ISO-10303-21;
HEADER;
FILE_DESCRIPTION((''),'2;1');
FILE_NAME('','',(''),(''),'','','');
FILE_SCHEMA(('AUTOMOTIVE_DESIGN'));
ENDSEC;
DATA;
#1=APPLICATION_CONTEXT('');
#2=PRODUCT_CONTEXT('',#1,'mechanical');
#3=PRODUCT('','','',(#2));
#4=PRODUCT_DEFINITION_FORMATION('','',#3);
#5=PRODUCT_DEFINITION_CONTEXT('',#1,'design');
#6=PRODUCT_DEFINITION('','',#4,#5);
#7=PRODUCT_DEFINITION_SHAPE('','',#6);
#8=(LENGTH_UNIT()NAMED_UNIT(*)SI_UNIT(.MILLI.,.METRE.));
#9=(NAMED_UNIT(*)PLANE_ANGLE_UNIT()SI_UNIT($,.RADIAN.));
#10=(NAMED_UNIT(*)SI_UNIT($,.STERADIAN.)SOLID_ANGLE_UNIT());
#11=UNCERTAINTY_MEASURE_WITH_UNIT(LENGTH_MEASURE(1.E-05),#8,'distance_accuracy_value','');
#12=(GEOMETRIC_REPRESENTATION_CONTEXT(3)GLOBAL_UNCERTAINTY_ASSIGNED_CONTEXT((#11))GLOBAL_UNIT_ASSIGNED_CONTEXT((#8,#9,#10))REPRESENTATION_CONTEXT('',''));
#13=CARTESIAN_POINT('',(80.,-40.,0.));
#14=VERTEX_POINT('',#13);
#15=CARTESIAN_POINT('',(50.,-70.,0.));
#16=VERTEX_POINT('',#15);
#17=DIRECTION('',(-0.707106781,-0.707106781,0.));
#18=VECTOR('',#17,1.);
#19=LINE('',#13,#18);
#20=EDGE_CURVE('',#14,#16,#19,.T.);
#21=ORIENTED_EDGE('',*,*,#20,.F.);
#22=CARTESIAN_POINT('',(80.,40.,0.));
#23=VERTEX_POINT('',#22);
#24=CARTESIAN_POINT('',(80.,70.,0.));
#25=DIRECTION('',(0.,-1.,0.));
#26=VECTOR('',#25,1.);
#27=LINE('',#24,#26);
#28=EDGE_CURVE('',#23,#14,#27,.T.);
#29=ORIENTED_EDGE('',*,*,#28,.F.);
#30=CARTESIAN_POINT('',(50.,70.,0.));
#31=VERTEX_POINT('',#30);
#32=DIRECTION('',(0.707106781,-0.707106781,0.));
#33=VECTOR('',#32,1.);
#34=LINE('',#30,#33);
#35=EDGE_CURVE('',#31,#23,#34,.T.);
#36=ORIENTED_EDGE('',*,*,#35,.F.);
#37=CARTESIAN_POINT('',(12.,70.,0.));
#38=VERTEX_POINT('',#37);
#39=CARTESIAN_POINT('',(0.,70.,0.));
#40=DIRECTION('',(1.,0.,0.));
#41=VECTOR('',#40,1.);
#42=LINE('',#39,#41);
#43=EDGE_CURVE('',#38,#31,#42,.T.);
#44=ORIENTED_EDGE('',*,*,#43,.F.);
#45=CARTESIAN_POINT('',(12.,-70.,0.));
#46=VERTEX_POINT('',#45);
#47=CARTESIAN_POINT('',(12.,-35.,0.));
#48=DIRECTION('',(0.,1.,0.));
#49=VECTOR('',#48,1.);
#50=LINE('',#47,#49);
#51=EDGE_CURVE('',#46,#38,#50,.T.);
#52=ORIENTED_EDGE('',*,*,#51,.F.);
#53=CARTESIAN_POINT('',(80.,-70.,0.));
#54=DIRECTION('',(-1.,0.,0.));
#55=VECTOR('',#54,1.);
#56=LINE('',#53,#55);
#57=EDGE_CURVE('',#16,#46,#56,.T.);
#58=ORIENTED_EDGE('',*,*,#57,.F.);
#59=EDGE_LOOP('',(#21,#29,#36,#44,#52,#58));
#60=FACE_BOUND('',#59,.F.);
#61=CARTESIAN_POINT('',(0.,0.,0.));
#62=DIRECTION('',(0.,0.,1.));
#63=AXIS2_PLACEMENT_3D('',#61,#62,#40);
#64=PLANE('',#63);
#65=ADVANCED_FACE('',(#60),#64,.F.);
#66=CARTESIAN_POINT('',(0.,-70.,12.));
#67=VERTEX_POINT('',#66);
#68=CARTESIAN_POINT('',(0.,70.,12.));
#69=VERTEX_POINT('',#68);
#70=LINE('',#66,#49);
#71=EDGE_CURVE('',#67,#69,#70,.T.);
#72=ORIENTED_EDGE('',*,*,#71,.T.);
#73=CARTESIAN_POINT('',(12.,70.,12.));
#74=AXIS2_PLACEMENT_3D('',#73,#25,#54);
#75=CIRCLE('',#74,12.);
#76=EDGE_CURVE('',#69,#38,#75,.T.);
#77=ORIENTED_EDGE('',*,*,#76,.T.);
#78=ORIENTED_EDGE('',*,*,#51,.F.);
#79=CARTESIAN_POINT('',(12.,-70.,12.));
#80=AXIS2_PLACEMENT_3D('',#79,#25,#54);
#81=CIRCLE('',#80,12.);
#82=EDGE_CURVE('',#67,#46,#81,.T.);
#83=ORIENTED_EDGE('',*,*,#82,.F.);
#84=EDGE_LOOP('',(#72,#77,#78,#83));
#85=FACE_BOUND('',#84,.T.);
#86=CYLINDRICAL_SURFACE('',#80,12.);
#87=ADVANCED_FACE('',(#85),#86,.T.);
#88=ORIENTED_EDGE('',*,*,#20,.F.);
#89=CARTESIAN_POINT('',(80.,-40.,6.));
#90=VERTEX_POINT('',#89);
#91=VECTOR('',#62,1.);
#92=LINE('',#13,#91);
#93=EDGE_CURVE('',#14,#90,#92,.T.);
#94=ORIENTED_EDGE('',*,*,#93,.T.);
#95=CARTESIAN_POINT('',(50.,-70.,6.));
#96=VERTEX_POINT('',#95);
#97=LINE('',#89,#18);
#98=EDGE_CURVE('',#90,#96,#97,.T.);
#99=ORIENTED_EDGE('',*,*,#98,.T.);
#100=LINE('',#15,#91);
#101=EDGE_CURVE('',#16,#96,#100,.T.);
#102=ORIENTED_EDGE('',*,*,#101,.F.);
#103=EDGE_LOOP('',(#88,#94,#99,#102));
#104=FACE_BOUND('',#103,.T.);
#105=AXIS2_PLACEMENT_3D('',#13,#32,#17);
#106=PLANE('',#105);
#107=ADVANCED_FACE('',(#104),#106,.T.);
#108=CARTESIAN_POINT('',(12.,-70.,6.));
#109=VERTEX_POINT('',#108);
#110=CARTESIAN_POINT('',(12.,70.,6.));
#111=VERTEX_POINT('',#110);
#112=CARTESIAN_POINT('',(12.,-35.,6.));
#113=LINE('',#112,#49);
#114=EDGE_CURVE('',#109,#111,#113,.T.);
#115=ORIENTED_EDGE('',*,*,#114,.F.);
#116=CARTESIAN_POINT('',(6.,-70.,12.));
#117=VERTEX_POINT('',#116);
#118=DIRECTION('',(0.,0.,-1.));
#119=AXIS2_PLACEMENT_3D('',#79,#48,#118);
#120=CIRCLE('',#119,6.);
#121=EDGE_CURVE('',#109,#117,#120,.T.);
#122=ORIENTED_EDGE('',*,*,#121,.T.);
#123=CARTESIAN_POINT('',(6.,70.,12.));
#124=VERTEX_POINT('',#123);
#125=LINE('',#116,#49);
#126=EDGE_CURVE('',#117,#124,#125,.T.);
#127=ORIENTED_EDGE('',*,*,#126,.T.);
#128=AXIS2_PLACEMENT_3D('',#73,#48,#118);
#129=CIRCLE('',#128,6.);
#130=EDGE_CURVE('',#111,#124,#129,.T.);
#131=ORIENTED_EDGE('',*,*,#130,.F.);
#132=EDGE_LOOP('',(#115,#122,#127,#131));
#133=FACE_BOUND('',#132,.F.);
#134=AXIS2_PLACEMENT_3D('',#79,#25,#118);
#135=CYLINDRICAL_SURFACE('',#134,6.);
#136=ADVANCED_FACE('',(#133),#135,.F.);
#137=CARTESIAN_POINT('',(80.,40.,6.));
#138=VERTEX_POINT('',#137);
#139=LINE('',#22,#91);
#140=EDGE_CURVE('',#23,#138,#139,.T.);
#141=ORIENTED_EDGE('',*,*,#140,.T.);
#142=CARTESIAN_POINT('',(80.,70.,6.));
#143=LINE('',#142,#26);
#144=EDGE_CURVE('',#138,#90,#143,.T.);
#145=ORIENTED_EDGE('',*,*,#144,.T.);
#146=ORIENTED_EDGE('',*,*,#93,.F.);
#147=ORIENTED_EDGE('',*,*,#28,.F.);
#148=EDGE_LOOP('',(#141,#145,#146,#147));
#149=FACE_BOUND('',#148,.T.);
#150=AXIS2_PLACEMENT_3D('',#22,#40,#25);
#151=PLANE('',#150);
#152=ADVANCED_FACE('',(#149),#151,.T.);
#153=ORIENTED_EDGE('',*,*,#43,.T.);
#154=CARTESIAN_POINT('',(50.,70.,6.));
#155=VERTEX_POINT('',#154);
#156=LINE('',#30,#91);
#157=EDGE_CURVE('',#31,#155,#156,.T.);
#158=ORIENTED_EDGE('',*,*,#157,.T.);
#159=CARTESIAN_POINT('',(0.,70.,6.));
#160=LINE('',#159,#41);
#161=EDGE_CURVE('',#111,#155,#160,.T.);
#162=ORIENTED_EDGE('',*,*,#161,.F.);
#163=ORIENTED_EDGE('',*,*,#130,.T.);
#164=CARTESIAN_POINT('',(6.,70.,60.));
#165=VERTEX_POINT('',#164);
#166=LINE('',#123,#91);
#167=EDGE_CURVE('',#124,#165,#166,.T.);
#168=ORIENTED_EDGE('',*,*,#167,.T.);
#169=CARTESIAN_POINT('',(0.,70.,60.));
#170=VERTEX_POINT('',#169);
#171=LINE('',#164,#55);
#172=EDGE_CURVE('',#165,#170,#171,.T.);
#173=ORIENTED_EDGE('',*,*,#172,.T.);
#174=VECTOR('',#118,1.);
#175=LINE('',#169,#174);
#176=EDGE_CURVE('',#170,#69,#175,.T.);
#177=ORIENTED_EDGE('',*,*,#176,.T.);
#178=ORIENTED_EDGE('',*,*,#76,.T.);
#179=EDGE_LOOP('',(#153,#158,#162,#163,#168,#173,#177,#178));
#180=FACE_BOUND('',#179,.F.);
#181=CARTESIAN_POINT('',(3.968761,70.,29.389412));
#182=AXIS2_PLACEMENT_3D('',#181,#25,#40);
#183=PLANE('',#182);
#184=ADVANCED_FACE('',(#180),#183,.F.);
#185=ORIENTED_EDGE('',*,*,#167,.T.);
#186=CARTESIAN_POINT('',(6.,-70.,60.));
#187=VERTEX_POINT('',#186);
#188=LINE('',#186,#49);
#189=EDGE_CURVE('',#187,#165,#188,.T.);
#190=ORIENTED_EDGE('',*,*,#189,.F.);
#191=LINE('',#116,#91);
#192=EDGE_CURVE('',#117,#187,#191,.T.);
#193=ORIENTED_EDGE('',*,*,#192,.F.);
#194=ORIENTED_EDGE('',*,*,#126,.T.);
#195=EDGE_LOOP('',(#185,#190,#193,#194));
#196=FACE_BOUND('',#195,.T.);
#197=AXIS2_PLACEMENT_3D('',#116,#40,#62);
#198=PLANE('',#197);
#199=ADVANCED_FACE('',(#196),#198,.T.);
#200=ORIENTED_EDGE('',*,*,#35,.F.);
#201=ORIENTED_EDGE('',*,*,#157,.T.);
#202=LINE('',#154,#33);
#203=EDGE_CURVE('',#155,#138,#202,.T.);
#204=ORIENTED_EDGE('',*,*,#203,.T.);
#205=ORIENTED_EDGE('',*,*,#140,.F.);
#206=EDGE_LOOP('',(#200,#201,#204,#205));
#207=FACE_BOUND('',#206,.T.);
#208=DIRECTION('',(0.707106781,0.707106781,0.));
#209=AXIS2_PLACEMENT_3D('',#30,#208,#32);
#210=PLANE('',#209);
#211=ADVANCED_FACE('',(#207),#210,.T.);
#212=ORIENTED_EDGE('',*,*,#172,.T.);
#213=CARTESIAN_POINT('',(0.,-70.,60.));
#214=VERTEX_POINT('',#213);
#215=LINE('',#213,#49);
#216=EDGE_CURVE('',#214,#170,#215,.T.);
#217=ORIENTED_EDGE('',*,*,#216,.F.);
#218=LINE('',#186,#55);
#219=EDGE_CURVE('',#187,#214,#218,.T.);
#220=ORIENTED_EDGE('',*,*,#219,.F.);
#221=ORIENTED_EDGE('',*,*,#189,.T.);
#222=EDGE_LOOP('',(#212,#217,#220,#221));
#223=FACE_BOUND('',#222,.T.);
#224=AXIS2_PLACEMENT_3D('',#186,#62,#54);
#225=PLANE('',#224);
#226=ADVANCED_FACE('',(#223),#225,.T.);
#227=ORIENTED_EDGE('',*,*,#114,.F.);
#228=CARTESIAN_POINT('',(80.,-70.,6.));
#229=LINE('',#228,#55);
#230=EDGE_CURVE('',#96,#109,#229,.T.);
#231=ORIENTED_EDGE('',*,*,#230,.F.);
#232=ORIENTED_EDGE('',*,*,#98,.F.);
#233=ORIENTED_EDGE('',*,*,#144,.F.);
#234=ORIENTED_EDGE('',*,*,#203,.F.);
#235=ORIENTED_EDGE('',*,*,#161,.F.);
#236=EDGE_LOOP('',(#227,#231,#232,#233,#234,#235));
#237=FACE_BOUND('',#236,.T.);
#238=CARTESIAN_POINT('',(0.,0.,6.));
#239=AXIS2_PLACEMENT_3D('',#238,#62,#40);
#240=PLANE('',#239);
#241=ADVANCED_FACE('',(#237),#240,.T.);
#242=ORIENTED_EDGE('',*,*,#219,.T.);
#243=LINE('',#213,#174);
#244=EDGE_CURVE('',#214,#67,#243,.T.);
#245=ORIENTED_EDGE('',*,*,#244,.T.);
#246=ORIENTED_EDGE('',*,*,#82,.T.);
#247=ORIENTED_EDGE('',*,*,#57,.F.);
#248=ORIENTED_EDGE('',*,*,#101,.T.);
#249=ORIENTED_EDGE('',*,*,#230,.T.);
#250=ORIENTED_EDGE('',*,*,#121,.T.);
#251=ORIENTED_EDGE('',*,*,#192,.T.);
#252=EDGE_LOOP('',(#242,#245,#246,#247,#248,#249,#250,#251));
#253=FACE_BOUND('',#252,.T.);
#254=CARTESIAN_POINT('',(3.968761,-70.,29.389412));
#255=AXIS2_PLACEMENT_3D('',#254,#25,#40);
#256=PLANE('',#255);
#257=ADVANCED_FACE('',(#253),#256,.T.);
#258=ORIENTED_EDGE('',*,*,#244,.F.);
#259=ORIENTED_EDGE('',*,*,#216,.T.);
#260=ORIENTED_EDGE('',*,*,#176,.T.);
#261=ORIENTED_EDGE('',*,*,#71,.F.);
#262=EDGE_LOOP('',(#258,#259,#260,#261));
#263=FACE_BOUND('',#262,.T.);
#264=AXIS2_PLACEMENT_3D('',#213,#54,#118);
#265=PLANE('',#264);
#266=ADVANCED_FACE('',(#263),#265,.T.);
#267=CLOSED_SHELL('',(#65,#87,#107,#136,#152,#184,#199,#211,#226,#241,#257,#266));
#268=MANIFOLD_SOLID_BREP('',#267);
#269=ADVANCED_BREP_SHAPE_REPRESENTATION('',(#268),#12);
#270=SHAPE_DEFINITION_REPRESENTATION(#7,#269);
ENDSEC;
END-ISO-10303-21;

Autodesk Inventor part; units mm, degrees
ref_plane "YZ Plane" through (0, 0, 0) normal (1, 0, 0) x (0, 1, 0)
ref_plane "XZ Plane" through (0, 0, 0) normal (0, 1, 0) x (-1, 0, 0)
ref_plane "XY Plane" through (0, 0, 0) normal (0, 0, 1) x (1, 0, 0)
sketch "Sketch1" plane through (0, 0, 0) normal (0, 0, 1) x (1, 0, 0)
  line L0 (0, 70) -> (80, 70)
  line L1 (80, 70) -> (80, -70)
  line L2 (80, -70) -> (0, -70)
  line L3 (0, -70) -> (0, 70)
  line L4 (40, 70) -> (40, -70) construction
  line L5 (50, 70) -> (80, 40)
  line L6 (80, -40) -> (50, -70)
  point P0 (0, 0)
  point P1 (0, 0)
  dimension "d1" = 140
  dimension "d15" = 30
  dimension "d27" = 80
  dimension "d28" = 45
extrude "Plate1" add sketch "Sketch1" along normal blind 6 contours L0 L5 L1 L6 L2 L3
sketch "Sketch3" plane through (6, -70, 0) normal (-1, 0, 0) x (0, -1, 0)
  line L0 (-140, 0) -> (0, 0)
  line L1 (0, 0) -> (0, 60)
  line L2 (0, 60) -> (-140, 60)
  line L3 (-140, 60) -> (-140, 0)
edge flange "Flange1" height 60 angle 90 thickness 6 bend radius 6 thickness toward (-1, 0, 0) relief tear relief width 6 relief depth 3 edges at (0, 0, 6) wall of the first edge with corners at (6, 70, 0) (6, -70, 0) (6, -70, 60) (6, 70, 60)
bend "Bend1"
corner "Corner1"
equation "\"d2\" = Thickness"
equation "\"d17\" = BendReliefWidth"
equation "\"d18\" = BendReliefDepth"
equation "\"d19\" = MinimumRemnant"
equation "\"d20\" = TransitionRadius"
equation "\"d23\" = BendRadius"
equation "\"d24\" = CornerReliefSize"
equation "\"d25\" = GapSize"
equation "\"d26\" = JacobiRadiusSize"
equation "\"BendRadius\" = Thickness"
equation "\"BendReliefWidth\" = Thickness"
equation "\"BendReliefDepth\" = 0.5 * Thickness"
equation "\"CornerReliefSize\" = 4 * Thickness"
equation "\"MinimumRemnant\" = 2 * Thickness"
equation "\"TransitionRadius\" = BendRadius"
equation "\"JacobiRadiusSize\" = BendRadius"
equation "\"GapSize\" = Thickness"
equation "\"Thickness\" = 6"
properties part number "PNS-0812 floor ring  strengthen"
